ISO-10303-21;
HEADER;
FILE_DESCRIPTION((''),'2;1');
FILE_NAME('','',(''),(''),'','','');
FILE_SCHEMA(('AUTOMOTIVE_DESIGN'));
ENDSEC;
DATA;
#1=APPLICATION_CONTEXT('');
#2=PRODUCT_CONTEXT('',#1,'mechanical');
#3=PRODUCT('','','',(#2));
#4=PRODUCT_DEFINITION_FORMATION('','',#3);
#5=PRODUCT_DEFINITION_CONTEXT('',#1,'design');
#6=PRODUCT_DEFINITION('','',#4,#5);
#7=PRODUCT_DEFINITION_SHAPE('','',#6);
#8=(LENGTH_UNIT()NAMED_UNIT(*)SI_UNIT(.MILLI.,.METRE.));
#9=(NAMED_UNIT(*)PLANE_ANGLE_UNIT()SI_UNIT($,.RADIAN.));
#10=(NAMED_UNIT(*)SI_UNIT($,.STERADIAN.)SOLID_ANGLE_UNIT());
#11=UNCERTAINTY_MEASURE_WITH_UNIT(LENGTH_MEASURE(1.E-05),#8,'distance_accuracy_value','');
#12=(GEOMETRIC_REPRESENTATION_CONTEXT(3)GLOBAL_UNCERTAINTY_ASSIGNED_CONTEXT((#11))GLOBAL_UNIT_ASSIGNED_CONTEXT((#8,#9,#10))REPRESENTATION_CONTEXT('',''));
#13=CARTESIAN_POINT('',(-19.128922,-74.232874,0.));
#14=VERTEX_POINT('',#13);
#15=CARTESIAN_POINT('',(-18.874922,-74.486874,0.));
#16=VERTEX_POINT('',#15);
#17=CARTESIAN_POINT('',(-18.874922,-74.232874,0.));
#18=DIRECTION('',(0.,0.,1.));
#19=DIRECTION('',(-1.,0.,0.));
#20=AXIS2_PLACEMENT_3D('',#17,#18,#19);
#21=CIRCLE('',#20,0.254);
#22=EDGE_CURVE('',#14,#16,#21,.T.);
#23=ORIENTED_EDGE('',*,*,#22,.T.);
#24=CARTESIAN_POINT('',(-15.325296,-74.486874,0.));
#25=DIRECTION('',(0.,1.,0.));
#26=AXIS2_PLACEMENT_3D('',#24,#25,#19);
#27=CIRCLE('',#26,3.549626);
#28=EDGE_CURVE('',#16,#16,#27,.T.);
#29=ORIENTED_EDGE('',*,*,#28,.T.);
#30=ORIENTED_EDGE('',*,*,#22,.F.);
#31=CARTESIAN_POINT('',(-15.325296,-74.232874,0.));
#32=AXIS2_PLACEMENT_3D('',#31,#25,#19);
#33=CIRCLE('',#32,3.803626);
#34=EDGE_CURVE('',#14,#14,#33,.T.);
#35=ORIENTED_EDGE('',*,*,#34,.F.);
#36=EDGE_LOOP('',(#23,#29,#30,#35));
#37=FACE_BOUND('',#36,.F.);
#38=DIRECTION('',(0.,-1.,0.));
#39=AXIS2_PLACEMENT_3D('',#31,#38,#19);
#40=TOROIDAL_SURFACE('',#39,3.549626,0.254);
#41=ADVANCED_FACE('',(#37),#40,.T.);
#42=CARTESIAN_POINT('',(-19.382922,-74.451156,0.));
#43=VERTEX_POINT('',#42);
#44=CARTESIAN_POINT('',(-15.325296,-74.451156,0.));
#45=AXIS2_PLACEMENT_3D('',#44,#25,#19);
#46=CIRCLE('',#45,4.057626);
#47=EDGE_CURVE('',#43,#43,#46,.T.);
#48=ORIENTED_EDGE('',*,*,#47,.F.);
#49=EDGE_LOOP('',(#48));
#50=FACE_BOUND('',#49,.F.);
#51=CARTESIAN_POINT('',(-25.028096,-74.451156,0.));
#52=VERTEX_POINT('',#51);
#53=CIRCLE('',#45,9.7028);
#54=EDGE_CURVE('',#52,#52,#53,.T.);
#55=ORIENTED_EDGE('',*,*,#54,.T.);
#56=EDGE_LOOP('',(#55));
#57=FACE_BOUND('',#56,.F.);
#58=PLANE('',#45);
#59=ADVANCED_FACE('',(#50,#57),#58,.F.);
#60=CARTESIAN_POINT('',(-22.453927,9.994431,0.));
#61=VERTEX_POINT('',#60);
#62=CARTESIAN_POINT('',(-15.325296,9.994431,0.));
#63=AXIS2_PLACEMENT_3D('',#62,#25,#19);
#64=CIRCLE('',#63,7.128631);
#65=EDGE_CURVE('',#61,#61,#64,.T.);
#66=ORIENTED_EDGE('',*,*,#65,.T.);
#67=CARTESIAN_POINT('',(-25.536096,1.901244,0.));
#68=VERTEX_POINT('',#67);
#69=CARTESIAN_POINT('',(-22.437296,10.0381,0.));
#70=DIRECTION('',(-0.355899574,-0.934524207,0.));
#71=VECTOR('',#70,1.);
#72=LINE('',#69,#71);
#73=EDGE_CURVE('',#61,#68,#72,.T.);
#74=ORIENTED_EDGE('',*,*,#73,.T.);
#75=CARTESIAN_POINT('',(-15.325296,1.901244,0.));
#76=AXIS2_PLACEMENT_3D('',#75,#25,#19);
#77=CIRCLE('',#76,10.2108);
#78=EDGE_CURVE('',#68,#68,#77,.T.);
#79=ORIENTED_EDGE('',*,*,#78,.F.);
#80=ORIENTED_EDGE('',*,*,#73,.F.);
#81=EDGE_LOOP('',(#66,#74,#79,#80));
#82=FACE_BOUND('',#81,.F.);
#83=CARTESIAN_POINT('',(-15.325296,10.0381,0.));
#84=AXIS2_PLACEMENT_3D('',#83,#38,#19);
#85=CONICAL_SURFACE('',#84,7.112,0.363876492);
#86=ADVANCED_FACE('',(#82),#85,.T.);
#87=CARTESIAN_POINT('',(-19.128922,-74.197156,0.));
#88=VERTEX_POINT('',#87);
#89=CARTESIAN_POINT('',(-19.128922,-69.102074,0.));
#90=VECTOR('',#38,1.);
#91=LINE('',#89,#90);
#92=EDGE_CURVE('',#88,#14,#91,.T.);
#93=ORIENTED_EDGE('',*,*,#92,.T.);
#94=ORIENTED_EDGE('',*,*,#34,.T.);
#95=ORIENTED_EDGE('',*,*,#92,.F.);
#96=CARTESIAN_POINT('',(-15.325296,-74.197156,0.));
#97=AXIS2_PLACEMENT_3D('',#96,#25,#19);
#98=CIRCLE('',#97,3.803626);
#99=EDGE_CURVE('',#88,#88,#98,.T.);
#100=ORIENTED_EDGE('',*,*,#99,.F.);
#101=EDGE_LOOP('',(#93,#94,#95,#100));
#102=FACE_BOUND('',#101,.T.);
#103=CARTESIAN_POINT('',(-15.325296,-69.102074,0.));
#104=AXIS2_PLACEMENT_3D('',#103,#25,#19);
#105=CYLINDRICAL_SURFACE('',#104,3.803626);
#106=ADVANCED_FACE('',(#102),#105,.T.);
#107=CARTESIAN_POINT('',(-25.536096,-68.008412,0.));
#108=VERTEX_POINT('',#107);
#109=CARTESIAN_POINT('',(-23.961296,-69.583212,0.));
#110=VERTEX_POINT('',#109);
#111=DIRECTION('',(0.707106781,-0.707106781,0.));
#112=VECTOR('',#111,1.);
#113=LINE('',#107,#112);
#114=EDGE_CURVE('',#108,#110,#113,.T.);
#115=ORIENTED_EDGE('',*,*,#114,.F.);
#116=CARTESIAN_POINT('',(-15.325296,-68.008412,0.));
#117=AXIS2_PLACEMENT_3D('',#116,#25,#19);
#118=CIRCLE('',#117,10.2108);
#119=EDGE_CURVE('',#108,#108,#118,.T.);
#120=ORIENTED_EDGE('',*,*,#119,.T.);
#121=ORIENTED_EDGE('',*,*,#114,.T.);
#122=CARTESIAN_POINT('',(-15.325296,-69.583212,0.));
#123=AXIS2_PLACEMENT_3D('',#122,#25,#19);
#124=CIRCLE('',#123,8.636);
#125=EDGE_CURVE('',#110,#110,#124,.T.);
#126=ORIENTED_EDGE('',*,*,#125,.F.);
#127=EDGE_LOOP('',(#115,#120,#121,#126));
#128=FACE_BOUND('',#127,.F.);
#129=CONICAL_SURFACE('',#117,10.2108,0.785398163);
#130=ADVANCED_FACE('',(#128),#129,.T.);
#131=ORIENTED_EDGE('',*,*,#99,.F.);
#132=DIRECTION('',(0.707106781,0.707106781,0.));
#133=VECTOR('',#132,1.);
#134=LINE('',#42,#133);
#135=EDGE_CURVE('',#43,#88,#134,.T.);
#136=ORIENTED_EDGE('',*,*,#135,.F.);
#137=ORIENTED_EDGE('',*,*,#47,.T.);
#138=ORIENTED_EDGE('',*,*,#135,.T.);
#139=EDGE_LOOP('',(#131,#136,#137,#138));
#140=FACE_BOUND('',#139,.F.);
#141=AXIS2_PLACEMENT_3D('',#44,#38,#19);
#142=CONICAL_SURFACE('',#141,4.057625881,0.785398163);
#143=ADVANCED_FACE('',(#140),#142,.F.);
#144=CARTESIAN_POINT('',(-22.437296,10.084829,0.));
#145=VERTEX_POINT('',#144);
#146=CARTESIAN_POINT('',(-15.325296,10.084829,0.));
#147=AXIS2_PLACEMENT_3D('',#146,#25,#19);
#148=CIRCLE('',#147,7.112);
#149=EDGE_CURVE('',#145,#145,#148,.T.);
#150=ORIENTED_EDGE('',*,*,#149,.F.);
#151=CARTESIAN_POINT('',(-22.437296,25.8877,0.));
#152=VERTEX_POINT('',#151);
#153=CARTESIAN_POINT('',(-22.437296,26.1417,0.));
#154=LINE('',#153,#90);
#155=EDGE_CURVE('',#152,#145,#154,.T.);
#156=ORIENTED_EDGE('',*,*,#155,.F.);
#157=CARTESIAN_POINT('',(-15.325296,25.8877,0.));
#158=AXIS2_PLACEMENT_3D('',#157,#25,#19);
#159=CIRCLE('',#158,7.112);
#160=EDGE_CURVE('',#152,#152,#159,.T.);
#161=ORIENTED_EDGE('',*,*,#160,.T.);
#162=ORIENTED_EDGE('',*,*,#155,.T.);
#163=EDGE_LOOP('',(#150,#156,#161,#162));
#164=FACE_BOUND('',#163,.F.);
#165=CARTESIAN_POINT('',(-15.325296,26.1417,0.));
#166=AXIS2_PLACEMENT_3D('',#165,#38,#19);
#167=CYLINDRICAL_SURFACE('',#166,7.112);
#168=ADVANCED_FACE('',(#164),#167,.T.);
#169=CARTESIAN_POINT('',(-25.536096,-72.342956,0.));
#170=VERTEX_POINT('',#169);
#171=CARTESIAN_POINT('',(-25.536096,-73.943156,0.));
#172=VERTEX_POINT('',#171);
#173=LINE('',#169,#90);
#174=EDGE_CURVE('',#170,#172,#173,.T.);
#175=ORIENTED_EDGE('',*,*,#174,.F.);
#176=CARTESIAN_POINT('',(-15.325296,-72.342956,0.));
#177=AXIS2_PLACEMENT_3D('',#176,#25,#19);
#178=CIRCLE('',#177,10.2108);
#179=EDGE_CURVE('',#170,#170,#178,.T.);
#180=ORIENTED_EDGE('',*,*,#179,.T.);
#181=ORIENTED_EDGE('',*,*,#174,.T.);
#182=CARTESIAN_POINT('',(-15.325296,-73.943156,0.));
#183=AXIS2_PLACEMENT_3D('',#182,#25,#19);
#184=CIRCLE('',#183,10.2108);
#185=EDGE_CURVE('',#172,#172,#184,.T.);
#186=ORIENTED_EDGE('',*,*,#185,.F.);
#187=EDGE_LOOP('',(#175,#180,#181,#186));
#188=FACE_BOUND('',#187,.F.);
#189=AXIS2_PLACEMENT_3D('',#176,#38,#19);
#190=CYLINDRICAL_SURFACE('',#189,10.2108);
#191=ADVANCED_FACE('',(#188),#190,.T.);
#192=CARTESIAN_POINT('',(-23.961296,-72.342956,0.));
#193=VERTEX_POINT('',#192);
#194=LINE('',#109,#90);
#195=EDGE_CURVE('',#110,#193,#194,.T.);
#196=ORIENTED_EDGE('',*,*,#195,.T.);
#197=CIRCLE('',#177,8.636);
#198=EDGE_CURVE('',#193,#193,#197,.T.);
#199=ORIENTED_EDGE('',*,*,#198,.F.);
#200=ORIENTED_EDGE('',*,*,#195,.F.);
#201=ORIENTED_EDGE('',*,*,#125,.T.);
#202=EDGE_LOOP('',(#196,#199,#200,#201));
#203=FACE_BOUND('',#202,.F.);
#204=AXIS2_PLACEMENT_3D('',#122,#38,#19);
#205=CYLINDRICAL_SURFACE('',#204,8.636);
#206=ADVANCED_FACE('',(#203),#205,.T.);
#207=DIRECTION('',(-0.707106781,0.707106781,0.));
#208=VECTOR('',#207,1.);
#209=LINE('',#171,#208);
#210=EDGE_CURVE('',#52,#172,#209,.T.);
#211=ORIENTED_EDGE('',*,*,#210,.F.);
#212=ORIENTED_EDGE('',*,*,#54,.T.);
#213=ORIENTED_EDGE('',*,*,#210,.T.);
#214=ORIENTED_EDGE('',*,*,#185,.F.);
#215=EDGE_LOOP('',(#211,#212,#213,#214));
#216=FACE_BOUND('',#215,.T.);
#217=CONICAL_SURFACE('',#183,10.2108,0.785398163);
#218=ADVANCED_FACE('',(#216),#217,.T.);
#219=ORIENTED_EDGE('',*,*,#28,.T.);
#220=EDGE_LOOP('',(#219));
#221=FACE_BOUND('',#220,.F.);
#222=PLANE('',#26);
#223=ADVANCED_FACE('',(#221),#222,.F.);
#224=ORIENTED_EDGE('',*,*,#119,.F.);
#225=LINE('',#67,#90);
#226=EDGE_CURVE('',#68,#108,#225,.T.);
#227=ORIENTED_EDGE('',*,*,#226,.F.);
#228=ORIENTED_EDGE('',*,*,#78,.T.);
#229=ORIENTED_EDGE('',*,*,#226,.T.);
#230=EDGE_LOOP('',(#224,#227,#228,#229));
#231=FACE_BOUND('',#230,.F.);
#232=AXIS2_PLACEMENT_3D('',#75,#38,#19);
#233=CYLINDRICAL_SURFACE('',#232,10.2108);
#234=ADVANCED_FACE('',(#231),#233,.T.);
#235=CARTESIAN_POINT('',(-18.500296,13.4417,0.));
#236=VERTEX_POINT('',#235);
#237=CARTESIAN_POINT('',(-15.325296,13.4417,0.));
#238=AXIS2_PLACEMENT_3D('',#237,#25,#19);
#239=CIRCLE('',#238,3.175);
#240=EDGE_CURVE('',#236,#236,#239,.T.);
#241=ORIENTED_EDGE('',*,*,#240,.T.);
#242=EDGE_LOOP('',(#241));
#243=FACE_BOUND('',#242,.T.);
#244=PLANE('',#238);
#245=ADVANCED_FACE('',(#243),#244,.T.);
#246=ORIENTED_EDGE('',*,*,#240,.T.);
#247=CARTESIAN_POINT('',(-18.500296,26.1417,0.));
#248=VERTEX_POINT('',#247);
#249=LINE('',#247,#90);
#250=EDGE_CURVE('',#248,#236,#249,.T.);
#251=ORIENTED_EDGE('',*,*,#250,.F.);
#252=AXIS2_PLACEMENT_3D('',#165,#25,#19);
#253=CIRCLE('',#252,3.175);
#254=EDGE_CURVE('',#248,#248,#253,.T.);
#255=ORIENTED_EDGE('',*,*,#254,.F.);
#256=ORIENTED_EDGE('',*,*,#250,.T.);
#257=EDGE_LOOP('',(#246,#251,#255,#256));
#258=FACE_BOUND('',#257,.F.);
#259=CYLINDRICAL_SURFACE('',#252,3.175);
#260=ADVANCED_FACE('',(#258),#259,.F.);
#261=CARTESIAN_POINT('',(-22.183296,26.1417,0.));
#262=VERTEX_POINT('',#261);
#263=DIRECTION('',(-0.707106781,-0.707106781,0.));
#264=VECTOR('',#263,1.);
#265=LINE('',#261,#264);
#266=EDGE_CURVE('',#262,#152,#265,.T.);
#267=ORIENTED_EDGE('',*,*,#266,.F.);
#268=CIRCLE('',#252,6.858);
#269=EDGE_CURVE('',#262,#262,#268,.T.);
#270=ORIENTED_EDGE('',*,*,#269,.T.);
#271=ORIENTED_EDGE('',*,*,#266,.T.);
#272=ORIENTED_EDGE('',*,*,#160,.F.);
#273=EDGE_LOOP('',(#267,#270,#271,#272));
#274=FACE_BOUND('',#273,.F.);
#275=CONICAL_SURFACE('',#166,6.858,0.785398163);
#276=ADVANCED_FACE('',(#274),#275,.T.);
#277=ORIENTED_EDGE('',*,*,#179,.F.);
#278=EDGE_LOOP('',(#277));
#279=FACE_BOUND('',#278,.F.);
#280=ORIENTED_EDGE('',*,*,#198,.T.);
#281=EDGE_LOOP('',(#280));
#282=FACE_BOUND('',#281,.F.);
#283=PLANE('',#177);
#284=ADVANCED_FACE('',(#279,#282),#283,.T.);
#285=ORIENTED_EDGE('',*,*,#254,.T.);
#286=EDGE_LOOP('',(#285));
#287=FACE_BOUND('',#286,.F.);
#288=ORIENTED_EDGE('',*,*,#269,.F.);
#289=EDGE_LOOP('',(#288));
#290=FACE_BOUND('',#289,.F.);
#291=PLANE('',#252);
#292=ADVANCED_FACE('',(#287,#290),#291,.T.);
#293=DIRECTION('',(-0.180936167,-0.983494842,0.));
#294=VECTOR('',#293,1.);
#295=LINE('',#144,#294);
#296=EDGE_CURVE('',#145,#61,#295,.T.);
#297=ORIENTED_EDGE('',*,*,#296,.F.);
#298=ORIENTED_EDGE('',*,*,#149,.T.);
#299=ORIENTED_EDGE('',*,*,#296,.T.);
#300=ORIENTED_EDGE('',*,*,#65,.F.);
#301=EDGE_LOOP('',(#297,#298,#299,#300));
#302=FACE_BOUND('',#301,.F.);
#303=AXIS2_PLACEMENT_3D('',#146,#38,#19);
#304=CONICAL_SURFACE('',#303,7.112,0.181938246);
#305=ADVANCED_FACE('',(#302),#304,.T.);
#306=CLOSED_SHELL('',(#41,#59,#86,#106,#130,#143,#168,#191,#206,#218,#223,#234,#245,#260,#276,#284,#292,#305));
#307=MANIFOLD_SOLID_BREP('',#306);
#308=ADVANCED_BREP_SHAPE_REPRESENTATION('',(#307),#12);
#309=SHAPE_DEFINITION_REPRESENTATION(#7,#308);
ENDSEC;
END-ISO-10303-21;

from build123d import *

# Parameters (mm, degrees)
F3_DEPTH = 5.3848
F4_R     = 0.254
F5_SIZE  = 0.508
F6_R     = 3.175
F7_DEPTH = 12.7


# Not quite as in the source:
# - a fillet or chamfer that OpenCascade refuses, or shapes differently, is made with other operations: its cross-section is extruded or revolved along the edge and cut away or added


with BuildPart() as f1:
    # F0 (on Top) → F1 (revolve)
    with BuildSketch(Plane.XY):
        Polygon((-19.1289222062, -69.1020740439), (-15.3252963252, -69.1020740439), (-15.3252963252, 26.1417003232), (-21.4466963252, 26.1417003232), (-22.4372963252, 26.1417003232), (-22.4372963252, 10.0381003232), (-25.5360963252, 1.9012442353), (-25.5360963252, -68.0084118526), (-23.9612963252, -69.5832118526), (-23.9612963252, -72.3429557647), (-25.5360963252, -72.3429557647), (-25.5360963252, -74.4511557647), (-19.1289222062, -74.4511557647), align=None)
    revolve(axis=Axis((-15.3252963252, -24.1547277207, 0), (0, 1, 0)))

    # F2: chamfer of 0.254 on 3 edges, made by hand

    # F2_s1 → F2_t2 (revolve)
    with BuildSketch(Plane.XY):
        Polygon((-22.4372963252, 10.0848293801), (-22.4539271766, 9.9944308884), (-22.4372963252, 10.0381003232), align=None)
    revolve(axis=Axis((-15.3252963252, 10.0381003232, 0), (0, 1, 0)))

    # F2_s3 → F2_t4 (revolve, cut)
    with BuildSketch(Plane.XY):
        Polygon((-19.3829222062, -74.4511557647), (-19.1289222062, -74.1971557647), (-19.1289222062, -74.4511557647), align=None)
    revolve(axis=Axis((-15.3252963252, -74.4511557647, 0), (0, 1, 0)), mode=Mode.SUBTRACT)

    # F2_s5 → F2_t6 (revolve, cut)
    with BuildSketch(Plane.XY):
        Polygon((-22.1832963252, 26.1417003232), (-22.4372963252, 25.8877003232), (-22.4372963252, 26.1417003232), align=None)
    revolve(axis=Axis((-15.3252963252, 26.1417003232, 0), (0, 1, 0)), mode=Mode.SUBTRACT)

    # F3 (add): a face of the model
    f3_faces = [f1.faces().sort_by_distance(p)[0] for p in [
        (-15.3252963252, -69.1020740439, 0),
    ]]
    extrude(f3_faces, amount=F3_DEPTH)

    # F4
    f4_edges = [f1.edges().sort_by_distance(p)[0] for p in [
        (-11.52167, -74.486874, 0),
    ]]
    fillet(f4_edges, radius=F4_R)

    # F5
    f5_edges = [f1.edges().sort_by_distance(p)[0] for p in [
        (-5.114496, -74.451156, 0),
    ]]
    chamfer(f5_edges, length=F5_SIZE)

    # F6 (on face) → F7 (cut)
    with BuildSketch(Plane(origin=(0, 26.1417003232, 0), x_dir=(-1, 0, 0), z_dir=(0, 1, 0))):
        with Locations((15.3252963252, 0)):
            Circle(F6_R)
    extrude(amount=-F7_DEPTH, mode=Mode.SUBTRACT)


solid = f1.part
